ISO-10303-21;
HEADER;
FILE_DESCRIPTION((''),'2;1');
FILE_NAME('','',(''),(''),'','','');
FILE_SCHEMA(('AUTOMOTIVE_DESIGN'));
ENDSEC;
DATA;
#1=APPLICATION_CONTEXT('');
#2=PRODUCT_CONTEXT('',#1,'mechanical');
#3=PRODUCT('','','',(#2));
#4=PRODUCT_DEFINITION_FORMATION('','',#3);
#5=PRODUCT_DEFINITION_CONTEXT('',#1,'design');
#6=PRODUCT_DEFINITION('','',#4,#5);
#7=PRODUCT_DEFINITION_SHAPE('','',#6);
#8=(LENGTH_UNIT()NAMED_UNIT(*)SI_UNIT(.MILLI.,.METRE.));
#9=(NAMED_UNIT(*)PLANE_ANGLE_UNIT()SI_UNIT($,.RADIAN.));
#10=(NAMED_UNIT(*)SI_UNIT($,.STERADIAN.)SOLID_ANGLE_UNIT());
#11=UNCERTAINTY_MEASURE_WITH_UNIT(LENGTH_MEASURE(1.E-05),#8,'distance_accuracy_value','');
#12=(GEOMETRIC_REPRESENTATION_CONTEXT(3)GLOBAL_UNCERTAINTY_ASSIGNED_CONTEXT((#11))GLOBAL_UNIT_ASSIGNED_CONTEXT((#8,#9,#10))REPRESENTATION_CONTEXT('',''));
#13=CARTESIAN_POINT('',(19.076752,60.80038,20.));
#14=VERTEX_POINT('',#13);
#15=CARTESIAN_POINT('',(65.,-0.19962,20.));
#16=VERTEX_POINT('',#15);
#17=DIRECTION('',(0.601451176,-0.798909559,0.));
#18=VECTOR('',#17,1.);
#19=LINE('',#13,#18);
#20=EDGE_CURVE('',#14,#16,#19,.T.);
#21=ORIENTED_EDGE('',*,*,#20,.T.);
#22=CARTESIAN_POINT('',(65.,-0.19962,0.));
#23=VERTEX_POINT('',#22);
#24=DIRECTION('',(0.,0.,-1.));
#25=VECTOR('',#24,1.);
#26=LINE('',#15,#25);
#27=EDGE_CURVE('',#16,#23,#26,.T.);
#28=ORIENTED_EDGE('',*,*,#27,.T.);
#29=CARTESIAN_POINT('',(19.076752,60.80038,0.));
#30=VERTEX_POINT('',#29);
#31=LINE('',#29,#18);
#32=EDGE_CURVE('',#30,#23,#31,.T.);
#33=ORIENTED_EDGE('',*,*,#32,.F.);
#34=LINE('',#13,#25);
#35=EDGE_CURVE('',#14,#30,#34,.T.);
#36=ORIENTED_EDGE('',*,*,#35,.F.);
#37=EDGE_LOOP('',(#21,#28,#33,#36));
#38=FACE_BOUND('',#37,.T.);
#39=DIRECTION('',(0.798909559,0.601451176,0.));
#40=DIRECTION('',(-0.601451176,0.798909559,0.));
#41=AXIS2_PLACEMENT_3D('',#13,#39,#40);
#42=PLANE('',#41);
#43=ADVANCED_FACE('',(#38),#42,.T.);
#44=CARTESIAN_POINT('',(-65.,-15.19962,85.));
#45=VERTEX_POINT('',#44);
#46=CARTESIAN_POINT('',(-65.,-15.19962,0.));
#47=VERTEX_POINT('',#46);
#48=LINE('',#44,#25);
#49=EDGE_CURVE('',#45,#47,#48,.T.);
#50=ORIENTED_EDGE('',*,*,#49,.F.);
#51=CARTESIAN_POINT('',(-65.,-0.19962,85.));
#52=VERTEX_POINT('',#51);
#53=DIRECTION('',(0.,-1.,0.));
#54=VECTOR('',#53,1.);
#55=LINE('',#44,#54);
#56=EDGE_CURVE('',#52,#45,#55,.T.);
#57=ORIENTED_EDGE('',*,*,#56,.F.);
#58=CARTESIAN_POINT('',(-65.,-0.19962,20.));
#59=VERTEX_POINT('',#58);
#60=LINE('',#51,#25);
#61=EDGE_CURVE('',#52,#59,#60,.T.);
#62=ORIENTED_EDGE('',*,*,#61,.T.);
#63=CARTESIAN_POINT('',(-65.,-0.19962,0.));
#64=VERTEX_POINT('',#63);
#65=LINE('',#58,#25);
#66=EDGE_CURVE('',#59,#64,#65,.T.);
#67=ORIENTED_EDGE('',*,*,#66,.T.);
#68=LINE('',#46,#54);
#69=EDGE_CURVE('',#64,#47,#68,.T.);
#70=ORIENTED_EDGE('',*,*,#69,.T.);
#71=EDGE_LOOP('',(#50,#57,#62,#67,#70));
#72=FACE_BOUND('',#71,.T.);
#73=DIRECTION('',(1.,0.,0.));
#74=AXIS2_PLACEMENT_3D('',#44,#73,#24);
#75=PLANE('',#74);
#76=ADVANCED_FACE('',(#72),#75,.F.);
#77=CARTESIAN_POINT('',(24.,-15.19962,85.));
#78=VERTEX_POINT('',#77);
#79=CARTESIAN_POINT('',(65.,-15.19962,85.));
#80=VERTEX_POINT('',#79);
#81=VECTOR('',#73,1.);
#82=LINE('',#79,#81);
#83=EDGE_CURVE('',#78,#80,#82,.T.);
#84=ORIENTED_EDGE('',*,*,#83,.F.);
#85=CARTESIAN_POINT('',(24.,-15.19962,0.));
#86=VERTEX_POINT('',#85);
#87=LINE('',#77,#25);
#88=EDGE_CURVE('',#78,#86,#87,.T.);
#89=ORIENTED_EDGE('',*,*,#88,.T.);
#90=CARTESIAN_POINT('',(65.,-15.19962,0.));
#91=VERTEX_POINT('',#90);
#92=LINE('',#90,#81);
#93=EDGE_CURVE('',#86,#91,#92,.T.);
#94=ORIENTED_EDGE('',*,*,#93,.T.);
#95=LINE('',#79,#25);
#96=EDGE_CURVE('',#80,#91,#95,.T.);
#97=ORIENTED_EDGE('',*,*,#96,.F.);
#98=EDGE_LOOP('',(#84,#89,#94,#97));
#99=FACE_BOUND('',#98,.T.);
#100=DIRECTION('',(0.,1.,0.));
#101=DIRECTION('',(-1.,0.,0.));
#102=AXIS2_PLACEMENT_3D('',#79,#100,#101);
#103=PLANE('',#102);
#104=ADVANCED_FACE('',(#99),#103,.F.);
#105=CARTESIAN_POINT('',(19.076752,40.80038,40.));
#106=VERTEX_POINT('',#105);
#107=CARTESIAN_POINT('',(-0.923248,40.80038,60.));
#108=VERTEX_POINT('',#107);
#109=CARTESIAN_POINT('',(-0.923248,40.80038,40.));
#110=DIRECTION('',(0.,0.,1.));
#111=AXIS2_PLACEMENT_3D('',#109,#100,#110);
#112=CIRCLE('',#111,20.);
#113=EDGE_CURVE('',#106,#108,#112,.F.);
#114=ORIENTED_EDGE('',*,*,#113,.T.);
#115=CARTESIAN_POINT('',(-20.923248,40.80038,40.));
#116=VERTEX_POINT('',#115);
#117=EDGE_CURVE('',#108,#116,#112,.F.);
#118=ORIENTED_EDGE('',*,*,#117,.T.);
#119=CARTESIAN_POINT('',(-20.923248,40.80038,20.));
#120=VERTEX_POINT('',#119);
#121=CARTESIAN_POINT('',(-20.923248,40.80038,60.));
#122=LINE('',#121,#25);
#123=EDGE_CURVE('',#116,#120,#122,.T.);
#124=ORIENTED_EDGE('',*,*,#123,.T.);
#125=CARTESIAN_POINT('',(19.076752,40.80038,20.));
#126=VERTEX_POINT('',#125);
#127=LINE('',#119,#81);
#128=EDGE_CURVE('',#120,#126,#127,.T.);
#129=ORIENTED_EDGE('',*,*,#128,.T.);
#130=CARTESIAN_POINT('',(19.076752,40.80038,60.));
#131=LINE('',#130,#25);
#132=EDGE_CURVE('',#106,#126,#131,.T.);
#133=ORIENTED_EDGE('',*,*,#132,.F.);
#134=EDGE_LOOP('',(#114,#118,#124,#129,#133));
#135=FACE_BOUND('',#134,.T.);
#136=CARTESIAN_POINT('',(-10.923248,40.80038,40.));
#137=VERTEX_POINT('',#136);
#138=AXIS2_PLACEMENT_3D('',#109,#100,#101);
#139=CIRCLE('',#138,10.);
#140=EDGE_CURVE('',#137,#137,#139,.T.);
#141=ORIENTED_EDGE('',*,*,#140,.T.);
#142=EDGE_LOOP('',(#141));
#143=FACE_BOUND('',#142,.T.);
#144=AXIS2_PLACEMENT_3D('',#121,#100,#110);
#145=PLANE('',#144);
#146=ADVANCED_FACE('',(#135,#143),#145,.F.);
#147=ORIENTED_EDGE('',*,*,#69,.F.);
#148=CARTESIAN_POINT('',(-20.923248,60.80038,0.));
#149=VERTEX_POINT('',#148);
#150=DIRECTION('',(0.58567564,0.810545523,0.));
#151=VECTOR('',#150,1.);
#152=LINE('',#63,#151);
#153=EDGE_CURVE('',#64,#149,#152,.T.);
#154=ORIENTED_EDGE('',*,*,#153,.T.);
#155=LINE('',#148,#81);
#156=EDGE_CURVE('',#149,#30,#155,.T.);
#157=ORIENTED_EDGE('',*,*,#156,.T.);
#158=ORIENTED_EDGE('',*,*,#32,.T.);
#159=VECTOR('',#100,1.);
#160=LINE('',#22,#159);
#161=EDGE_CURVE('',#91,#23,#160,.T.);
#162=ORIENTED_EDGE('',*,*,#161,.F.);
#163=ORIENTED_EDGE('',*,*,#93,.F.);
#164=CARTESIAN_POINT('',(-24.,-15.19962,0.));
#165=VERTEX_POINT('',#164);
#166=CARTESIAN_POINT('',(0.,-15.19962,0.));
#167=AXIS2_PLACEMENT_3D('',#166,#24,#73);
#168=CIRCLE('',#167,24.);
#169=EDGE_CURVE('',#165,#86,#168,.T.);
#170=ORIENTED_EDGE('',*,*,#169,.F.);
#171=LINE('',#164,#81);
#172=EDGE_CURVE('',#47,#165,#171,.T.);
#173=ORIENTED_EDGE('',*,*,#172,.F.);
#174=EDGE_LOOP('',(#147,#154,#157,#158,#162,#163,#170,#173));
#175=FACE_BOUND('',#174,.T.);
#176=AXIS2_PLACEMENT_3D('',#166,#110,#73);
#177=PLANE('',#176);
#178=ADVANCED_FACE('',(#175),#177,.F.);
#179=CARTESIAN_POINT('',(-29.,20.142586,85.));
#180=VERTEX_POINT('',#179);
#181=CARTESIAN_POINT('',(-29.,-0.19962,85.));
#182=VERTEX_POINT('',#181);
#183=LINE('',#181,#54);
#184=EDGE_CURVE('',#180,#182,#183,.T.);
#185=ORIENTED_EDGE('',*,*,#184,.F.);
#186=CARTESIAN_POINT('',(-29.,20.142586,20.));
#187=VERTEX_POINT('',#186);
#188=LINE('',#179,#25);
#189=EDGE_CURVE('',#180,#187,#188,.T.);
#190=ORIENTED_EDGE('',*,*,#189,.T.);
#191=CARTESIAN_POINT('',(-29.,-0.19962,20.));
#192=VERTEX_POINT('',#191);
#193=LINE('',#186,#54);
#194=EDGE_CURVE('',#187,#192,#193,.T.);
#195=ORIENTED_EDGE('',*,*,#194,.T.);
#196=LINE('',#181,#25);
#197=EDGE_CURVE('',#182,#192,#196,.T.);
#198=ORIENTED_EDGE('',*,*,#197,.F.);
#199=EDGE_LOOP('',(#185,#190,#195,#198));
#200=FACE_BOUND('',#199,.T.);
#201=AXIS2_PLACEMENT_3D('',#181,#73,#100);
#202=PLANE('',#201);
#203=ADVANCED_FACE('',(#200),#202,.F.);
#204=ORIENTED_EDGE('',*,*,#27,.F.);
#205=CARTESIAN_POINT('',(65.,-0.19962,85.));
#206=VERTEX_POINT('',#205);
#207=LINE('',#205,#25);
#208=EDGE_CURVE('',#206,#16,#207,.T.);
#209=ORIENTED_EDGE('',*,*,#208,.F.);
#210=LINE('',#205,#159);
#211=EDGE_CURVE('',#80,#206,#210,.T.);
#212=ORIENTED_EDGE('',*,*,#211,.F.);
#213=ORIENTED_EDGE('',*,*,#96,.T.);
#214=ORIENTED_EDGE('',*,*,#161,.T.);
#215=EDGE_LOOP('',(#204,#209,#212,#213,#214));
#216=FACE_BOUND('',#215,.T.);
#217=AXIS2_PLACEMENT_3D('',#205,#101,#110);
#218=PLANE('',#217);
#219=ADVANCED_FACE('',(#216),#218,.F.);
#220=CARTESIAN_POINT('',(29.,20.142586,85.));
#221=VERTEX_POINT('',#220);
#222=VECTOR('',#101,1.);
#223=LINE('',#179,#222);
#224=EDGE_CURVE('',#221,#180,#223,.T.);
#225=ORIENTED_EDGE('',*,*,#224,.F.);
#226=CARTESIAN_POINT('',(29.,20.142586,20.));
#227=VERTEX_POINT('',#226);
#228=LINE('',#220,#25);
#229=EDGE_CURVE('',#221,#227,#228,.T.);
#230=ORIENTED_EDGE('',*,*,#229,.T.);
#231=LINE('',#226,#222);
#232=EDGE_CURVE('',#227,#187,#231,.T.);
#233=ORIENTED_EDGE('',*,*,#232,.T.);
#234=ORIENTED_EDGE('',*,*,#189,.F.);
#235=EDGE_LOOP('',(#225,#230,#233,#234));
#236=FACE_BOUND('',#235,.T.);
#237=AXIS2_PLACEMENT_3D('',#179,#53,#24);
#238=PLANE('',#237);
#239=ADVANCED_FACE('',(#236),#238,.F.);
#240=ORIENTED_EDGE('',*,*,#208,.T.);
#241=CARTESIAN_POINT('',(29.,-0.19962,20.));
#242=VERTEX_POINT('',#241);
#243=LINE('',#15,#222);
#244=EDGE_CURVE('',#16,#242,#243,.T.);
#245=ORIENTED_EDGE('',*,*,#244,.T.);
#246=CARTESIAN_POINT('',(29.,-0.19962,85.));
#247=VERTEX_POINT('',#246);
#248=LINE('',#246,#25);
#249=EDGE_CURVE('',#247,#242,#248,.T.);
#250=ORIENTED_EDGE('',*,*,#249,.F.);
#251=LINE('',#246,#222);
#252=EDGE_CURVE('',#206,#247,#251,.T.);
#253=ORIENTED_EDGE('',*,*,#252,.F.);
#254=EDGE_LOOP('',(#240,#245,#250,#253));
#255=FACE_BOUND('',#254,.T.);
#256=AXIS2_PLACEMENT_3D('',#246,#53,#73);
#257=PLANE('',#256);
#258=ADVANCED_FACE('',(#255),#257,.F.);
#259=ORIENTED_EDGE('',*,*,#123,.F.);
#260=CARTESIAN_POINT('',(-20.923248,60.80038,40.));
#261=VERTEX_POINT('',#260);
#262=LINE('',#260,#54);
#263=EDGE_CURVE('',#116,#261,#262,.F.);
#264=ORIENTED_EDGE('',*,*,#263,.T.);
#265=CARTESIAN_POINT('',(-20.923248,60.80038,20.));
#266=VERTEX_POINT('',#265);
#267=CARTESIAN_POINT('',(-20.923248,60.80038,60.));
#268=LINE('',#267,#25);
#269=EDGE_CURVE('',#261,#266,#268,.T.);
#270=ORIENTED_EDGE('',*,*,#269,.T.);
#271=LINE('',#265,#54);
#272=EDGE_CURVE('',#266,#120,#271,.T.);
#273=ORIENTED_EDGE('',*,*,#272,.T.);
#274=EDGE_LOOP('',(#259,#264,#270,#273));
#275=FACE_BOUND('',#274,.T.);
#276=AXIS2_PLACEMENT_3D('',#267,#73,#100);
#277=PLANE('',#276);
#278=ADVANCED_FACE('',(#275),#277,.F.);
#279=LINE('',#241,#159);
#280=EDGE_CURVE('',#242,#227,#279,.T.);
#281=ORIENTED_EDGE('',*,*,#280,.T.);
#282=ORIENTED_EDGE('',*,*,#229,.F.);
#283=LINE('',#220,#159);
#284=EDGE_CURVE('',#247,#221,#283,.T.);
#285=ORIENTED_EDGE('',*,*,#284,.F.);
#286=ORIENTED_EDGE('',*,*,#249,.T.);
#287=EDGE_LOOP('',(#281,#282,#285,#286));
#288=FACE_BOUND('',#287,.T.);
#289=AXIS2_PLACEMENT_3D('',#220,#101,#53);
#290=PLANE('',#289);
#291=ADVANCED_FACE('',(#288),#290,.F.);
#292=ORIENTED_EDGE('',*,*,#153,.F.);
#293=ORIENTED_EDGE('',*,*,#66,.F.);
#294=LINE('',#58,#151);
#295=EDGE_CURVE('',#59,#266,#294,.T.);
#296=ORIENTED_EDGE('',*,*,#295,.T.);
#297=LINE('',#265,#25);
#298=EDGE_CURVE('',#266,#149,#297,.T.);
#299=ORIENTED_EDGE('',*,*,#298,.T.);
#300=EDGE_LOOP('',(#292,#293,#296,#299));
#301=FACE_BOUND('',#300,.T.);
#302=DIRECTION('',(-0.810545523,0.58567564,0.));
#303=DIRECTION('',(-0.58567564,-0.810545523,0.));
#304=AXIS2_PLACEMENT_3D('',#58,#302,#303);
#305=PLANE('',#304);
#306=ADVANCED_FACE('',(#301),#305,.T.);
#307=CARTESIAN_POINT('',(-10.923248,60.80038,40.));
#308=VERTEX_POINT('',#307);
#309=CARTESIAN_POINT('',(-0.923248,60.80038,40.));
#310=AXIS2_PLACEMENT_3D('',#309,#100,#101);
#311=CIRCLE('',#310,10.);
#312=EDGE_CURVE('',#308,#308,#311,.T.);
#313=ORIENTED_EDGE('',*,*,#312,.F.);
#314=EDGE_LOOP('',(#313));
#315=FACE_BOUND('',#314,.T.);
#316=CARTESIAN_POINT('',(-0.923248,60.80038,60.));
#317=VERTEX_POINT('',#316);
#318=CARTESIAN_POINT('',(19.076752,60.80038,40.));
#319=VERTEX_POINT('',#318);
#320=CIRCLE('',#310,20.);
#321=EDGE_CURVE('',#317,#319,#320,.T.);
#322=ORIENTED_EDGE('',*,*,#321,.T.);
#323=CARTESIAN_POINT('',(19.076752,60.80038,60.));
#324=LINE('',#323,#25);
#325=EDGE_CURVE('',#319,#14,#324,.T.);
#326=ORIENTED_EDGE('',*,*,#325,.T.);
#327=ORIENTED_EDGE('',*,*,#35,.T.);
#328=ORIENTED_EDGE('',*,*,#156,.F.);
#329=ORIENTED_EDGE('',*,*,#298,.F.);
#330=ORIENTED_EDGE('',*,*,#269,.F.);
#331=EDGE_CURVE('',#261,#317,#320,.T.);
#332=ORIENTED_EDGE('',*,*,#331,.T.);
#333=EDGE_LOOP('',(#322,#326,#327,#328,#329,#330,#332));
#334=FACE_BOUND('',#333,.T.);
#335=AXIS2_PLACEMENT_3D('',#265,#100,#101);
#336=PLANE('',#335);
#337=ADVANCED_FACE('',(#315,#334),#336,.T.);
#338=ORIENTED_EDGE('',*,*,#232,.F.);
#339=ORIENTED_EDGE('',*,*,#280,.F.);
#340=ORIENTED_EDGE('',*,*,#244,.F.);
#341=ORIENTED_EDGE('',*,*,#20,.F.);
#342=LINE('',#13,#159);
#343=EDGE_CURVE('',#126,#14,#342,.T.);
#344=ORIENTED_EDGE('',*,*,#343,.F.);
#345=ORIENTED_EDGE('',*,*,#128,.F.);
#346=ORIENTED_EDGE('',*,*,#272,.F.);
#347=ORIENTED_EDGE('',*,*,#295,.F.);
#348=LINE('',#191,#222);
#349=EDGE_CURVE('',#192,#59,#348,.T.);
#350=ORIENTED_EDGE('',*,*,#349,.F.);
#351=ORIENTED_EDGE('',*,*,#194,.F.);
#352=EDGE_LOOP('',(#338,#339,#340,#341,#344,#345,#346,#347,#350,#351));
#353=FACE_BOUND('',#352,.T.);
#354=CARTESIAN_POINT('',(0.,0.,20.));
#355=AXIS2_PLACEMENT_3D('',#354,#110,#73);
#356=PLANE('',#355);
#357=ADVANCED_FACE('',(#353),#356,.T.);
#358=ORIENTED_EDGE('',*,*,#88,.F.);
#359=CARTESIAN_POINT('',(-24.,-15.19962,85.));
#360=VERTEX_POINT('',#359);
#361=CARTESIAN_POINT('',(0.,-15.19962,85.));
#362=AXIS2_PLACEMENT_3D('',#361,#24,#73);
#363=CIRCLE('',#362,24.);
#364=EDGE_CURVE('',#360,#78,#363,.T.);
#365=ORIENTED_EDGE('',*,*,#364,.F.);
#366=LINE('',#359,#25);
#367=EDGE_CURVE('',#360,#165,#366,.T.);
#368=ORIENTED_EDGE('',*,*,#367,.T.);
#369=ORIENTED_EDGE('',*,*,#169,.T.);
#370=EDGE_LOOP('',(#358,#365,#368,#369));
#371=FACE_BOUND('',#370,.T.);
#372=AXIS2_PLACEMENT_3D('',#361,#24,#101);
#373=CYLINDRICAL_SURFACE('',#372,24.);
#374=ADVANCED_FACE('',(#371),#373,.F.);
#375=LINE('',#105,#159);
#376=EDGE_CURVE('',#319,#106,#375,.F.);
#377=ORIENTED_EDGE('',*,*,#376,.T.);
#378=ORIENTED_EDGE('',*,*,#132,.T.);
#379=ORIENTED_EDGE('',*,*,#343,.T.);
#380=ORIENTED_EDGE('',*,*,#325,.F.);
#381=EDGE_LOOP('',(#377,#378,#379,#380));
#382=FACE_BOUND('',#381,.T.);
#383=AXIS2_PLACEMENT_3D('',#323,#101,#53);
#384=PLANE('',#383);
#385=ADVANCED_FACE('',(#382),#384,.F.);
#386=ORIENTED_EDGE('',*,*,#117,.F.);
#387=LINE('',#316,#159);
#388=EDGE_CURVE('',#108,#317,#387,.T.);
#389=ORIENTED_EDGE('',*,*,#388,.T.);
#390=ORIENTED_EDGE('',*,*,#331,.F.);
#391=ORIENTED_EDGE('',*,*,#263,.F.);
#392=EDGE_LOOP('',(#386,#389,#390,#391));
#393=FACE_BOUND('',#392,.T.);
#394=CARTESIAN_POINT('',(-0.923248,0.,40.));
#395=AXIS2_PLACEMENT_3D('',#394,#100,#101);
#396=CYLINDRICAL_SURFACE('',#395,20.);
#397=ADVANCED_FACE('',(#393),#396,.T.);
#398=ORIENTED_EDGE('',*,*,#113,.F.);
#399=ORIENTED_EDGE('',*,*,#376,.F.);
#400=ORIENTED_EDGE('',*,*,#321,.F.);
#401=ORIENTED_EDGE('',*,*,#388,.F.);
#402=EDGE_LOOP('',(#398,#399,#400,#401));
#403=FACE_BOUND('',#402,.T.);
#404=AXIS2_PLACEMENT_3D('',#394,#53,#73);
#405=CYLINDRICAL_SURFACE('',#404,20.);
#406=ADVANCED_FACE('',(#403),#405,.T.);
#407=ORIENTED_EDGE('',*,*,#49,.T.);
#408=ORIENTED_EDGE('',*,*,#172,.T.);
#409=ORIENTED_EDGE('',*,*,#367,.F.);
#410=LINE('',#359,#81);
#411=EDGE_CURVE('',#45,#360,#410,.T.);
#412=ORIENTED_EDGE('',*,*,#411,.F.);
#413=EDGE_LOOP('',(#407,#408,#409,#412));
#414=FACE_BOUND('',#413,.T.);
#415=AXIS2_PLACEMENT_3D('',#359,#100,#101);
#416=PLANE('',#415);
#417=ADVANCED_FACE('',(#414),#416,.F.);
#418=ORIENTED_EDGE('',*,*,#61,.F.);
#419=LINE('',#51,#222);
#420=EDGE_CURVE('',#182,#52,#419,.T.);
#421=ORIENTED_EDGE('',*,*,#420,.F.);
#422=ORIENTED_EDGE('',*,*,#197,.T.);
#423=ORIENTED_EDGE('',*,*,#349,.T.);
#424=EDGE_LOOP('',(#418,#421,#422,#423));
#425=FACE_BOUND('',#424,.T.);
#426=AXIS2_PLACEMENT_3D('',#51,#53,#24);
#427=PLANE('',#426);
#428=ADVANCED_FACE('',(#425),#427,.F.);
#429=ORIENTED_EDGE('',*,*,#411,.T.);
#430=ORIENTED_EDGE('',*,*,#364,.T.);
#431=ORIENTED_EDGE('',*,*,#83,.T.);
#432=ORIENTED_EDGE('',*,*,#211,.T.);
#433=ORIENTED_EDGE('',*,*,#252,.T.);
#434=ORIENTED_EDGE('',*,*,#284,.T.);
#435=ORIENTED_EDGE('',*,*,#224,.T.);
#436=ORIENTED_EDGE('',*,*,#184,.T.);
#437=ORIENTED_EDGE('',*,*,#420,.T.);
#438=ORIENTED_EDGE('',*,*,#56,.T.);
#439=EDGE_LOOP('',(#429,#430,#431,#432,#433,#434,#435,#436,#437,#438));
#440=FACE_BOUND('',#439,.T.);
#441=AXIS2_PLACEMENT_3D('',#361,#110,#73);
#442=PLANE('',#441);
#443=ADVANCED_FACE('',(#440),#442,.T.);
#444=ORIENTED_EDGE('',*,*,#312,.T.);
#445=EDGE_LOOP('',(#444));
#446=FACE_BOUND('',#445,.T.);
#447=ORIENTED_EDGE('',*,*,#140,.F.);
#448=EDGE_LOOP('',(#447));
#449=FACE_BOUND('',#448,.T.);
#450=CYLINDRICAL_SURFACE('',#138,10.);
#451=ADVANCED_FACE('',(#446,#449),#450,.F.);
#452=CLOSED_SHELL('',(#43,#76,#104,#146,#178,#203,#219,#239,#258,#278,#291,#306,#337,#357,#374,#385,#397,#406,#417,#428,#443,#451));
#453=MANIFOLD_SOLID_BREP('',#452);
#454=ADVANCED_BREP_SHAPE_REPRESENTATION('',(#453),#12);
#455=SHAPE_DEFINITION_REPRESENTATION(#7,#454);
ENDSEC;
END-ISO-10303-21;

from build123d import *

# Parameters (mm, degrees)
EXTRUDE_2_DEPTH     = 85
EXTRUDE_3_DEPTH     = 20
SKETCH_5_W          = 40
SKETCH_5_H          = 20
EXTRUDE_4_DEPTH     = 40
FILLET_1_R          = 20
SKETCH_6_R          = 10
CUT_EXTRUDE_1_DEPTH = 20


with BuildPart() as part:
    # 스케치1 → 보스-돌출2 (new body)
    with BuildSketch(Plane.XY):
        with BuildLine():
            Line((-24, -15.199619772), (-65, -15.199619772))
            Line((-65, -15.199619772), (-65, -0.199619772))
            Line((-65, -0.199619772), (-29, -0.199619772))
            Line((-29, -0.199619772), (-29, 20.142585551))
            Line((-29, 20.142585551), (29, 20.142585551))
            Line((29, 20.142585551), (29, -0.199619772))
            Line((29, -0.199619772), (65, -0.199619772))
            Line((65, -0.199619772), (65, -15.199619772))
            Line((65, -15.199619772), (24, -15.199619772))
            ThreePointArc((24, -15.199619772), (0, 8.800380228), (-24, -15.199619772))
        make_face()
    extrude(amount=EXTRUDE_2_DEPTH)

    # 스케치4 → 보스-돌출3 (add)
    with BuildSketch(Plane(origin=(0, 0, 0), x_dir=(-1, 0, 0), z_dir=(0, 0, -1))):
        Polygon((-65, -0.199619772), (-29, -0.199619772), (-29, 20.142585551), (29, 20.142585551), (29, -0.199619772), (65, -0.199619772), (20.923247903, 60.800380228), (-19.076752097, 60.800380228), align=None)
    extrude(amount=-EXTRUDE_3_DEPTH)

    # 스케치5 → 보스-돌출4 (add)
    with BuildSketch(Plane.XY.offset(20)):
        with Locations((-0.923247903, 50.800380228)):
            Rectangle(SKETCH_5_W, SKETCH_5_H)
    extrude(amount=EXTRUDE_4_DEPTH)

    # 필렛1
    fillet_1_edges = [part.edges().sort_by_distance(p)[0] for p in [
        (-20.923247903, 50.800380228, 60),
        (19.076752097, 50.800380228, 60),
    ]]
    fillet(fillet_1_edges, radius=FILLET_1_R - 0.0001)  # a hair under: the kernel refuses the full size

    # 스케치6 → 컷-돌출1 (cut)
    with BuildSketch(Plane(origin=(0, 60.800380228, 0), x_dir=(1, 0, 0), z_dir=(0, 1, 0))):
        with Locations(Location((-0.923247903, -40, 0), (0, 0, 180))):
            Circle(SKETCH_6_R)
    extrude(amount=-CUT_EXTRUDE_1_DEPTH, mode=Mode.SUBTRACT)


solid = part.part
